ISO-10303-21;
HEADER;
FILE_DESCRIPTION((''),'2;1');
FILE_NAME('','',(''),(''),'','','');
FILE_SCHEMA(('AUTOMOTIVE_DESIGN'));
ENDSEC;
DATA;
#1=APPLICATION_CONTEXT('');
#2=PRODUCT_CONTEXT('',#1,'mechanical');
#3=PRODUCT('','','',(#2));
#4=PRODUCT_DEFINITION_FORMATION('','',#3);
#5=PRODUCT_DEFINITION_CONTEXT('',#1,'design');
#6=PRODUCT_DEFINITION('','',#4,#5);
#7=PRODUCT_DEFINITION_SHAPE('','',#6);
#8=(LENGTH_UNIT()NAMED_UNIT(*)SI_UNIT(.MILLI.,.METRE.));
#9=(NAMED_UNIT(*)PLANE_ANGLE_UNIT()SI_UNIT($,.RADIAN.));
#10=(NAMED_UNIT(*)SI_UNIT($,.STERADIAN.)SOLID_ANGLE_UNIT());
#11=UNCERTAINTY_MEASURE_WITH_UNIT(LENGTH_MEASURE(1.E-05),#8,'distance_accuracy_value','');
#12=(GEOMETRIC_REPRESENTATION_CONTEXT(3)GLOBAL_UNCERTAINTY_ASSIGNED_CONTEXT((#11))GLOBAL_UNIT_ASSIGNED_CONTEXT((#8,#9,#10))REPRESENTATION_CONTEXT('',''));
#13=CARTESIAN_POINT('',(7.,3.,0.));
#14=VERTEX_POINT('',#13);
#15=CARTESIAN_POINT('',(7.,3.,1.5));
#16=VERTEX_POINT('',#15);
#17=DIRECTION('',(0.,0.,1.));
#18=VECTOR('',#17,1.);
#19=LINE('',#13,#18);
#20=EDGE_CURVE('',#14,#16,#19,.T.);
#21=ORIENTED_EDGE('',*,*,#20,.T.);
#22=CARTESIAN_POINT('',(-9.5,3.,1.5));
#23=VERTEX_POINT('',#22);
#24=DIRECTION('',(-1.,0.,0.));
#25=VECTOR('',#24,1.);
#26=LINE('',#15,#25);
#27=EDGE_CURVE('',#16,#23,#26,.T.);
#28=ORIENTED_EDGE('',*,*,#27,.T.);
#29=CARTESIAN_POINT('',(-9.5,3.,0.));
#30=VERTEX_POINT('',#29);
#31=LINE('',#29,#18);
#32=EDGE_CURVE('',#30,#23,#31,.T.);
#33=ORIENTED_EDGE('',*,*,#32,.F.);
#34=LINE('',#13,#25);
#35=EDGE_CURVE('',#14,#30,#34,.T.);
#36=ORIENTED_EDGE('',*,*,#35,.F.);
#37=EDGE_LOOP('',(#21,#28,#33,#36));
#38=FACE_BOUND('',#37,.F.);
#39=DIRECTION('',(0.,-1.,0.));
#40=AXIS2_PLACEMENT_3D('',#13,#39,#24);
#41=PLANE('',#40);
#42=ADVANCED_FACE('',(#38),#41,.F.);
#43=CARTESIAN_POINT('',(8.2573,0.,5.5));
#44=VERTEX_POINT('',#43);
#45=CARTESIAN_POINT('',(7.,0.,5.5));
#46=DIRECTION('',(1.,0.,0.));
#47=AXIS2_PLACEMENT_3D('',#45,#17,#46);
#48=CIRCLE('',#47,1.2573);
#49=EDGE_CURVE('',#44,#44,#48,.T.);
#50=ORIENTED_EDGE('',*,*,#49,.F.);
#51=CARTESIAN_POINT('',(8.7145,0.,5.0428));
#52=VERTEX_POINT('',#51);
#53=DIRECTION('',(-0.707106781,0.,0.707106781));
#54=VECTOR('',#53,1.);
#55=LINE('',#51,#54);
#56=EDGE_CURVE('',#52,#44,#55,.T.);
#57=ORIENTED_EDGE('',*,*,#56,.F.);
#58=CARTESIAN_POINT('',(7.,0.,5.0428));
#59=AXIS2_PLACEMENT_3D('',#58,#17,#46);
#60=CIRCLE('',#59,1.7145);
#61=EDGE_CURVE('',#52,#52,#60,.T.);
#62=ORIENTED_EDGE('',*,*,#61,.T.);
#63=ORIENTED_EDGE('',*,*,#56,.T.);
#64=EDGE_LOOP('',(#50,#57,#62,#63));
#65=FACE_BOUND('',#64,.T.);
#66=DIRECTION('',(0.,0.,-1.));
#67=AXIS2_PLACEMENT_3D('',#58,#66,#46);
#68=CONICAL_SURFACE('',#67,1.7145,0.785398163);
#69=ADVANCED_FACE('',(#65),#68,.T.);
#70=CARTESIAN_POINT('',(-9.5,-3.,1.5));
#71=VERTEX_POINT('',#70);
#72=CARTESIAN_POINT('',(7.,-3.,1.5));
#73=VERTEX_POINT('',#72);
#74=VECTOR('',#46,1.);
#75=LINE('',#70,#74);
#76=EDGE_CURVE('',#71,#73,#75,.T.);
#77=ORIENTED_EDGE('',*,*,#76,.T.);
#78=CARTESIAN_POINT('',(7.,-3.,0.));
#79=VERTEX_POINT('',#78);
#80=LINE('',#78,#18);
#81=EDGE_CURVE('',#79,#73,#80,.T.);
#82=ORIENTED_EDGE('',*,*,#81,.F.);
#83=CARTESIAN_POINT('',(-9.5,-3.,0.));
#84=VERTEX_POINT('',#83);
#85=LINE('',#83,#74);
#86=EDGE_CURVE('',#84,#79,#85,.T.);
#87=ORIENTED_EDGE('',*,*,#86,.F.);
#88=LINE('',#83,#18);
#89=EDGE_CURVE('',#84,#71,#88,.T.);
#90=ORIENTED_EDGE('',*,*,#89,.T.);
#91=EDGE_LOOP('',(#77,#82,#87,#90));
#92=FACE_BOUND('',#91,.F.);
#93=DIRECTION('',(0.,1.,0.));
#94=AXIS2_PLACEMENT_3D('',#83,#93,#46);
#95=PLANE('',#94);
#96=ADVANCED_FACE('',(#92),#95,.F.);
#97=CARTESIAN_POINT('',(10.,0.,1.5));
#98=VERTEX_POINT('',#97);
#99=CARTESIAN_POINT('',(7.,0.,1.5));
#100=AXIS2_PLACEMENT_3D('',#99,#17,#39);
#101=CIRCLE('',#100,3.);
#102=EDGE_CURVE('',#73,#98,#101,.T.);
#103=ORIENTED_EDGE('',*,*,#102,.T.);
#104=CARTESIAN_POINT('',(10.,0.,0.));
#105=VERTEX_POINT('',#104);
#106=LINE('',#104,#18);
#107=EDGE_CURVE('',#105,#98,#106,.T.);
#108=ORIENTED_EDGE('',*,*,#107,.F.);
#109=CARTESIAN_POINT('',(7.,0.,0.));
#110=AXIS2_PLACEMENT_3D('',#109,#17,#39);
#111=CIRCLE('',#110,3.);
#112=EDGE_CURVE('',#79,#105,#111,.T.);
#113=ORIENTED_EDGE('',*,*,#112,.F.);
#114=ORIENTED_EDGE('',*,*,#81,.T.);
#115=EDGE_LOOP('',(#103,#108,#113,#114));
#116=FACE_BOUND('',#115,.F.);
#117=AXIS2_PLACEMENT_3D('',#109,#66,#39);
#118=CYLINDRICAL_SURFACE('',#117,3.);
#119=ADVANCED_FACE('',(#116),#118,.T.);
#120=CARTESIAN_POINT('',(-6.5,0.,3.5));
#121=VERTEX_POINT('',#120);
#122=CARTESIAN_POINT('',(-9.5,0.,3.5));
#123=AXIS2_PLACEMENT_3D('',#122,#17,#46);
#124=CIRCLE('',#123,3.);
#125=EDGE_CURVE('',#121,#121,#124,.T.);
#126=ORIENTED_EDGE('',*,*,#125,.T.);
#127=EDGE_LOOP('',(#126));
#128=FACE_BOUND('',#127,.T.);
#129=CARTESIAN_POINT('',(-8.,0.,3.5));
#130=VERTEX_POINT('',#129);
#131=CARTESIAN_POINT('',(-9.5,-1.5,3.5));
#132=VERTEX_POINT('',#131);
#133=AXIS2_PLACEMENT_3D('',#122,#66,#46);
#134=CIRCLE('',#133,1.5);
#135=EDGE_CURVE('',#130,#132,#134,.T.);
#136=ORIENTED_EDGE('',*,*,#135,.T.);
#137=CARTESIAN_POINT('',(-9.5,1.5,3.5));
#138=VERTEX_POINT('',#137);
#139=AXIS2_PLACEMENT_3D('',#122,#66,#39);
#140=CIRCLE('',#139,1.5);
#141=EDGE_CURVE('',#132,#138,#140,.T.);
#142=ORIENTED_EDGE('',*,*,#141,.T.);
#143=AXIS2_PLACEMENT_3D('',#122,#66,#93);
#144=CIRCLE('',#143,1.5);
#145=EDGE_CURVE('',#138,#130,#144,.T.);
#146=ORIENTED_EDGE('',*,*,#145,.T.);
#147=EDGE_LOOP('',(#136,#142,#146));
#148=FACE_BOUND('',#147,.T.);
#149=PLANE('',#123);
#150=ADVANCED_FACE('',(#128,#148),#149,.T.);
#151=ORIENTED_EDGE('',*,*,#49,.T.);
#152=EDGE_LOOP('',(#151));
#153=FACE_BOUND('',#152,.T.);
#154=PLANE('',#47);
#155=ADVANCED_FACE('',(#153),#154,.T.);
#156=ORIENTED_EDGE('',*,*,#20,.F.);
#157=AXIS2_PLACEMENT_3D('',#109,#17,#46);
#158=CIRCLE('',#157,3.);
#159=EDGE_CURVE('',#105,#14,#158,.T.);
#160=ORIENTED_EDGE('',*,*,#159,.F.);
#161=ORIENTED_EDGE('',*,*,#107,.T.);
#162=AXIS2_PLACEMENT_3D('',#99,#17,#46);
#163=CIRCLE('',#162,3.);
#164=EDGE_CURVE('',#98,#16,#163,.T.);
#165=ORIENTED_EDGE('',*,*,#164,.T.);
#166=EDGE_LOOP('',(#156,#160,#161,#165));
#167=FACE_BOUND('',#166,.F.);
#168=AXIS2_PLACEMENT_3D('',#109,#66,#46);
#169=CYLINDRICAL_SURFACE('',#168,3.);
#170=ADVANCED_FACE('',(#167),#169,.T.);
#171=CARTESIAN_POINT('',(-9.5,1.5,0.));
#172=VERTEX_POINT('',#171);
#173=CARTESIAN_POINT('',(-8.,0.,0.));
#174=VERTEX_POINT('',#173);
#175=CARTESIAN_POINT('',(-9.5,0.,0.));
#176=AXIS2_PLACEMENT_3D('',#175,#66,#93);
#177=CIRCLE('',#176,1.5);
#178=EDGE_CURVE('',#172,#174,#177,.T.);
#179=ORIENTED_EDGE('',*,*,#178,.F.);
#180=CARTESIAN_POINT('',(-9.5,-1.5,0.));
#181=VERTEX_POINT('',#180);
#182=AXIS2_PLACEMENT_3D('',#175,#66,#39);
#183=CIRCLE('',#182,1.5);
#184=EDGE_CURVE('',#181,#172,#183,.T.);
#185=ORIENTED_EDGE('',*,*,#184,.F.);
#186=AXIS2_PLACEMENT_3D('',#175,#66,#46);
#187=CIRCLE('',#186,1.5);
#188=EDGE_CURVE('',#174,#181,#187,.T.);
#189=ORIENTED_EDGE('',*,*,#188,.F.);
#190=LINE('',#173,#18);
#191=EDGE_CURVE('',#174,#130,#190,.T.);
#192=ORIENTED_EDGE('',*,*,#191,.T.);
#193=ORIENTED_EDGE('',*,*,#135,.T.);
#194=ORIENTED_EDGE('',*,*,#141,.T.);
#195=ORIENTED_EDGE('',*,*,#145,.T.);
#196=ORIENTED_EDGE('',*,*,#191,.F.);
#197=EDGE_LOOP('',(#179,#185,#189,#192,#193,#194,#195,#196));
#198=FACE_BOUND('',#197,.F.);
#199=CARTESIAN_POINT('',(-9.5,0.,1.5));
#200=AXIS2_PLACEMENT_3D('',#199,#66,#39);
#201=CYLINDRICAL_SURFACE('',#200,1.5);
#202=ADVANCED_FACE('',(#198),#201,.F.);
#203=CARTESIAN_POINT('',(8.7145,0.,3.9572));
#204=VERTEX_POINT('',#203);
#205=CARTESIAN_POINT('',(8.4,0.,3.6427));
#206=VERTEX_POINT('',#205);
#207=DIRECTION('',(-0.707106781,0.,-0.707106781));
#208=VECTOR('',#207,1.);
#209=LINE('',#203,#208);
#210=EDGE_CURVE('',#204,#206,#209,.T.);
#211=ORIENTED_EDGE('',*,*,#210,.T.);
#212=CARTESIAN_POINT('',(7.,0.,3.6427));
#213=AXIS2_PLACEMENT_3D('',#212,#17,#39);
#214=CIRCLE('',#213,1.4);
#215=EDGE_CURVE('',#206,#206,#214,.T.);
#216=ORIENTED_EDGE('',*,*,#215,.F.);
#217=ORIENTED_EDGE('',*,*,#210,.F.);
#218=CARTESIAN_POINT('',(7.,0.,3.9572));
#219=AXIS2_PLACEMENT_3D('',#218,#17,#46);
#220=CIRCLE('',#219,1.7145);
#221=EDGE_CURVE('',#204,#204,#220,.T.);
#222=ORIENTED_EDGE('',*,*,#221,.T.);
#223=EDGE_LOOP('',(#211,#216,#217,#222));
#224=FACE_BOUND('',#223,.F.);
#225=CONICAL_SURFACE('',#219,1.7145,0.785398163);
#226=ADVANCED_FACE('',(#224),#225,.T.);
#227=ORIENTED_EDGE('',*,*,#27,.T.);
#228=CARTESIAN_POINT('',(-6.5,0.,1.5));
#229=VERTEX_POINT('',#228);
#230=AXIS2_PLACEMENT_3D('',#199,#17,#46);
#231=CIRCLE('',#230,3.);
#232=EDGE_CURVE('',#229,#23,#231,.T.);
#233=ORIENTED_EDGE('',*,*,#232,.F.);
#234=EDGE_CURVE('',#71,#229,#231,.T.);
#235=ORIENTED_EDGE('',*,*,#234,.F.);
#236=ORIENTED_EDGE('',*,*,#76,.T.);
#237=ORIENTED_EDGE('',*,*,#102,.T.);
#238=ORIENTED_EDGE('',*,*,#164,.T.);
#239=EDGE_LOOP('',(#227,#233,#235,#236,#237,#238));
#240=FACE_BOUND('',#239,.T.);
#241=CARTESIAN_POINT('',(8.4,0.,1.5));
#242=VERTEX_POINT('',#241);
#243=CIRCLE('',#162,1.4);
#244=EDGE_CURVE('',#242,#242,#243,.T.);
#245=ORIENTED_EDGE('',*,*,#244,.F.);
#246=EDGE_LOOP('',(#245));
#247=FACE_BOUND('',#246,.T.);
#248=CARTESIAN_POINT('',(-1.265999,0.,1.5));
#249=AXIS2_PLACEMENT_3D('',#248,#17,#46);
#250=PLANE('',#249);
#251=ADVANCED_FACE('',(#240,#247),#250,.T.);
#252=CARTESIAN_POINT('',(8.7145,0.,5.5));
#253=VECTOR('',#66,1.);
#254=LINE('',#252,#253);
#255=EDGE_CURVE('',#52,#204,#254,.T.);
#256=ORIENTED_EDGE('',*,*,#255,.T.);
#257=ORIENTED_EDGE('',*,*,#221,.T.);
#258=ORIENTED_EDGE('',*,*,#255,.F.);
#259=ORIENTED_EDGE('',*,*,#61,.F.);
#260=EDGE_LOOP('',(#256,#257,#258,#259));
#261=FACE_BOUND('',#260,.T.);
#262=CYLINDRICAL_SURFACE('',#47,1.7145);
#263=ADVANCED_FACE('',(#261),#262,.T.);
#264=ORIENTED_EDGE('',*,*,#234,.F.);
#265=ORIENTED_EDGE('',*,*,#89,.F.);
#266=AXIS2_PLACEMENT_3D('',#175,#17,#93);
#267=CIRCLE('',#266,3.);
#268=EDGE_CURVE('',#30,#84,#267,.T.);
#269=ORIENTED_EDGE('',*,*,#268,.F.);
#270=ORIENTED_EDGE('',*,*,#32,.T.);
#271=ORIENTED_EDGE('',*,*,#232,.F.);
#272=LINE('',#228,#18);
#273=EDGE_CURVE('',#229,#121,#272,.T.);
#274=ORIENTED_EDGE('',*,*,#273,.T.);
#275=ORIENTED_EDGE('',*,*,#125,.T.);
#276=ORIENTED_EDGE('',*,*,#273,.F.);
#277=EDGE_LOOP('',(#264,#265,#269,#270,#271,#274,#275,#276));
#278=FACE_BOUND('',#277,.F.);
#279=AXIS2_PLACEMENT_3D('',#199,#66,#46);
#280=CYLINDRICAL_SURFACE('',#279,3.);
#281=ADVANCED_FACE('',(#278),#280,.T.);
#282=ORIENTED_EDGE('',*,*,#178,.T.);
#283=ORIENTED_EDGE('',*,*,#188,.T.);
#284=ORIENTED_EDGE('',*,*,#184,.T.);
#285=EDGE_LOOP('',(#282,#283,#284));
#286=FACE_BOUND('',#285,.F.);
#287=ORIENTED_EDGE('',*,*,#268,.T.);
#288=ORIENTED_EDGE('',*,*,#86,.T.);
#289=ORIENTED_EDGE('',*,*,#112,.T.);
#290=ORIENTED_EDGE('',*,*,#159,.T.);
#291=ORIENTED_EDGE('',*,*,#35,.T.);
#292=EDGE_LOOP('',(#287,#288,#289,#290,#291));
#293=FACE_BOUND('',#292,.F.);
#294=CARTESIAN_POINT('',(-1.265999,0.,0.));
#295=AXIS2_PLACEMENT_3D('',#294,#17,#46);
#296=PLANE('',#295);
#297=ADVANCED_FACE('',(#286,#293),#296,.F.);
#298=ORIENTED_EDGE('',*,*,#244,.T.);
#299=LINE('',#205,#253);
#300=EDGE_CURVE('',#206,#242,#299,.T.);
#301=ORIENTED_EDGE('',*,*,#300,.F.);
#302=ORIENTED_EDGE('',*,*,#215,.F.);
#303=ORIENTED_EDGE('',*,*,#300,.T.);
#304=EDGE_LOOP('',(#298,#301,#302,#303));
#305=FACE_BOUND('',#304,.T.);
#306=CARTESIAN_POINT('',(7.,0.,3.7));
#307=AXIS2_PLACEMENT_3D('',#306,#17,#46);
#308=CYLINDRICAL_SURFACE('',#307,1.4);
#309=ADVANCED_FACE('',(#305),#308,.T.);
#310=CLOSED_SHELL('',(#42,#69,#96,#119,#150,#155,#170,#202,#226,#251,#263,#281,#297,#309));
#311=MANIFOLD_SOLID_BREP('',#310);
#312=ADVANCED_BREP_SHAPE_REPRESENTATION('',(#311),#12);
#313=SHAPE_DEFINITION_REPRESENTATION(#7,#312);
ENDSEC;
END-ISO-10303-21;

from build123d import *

# Parameters (mm, degrees)
F1_DEPTH    = 1.5
F2_R        = 1.4
F3_DEPTH    = 4
F4_R        = 1.7145
F5_DEPTH    = 2
F6_SIZE     = 0.4572
F7_S5_R     = 1.4
F7_T6_DEPTH = 4
F8_R        = 3
F9_DEPTH    = 2
F10_DEPTH   = 25.4


# Not quite as in the source:
# - a fillet or chamfer that OpenCascade refuses, or shapes differently, is made with other operations: its cross-section is extruded or revolved along the edge and cut away or added


with BuildPart() as f1:
    # F0 (on Top) → F1 (new body)
    with BuildSketch(Plane.XY):
        with BuildLine():
            Line((-9.5, -3), (7, -3))
            ThreePointArc((7, -3), (4, 0), (7, 3))
            Line((7, 3), (-9.5, 3))
            ThreePointArc((-9.5, 3), (-7.3786796564, 2.1213203436), (-6.5, 0))
            ThreePointArc((-6.5, 0), (-7.3786796564, -2.1213203436), (-9.5, -3))
        make_face()
        with BuildLine():
            ThreePointArc((7, 3), (4, 0), (7, -3))
            ThreePointArc((7, -3), (9.1213203436, -2.1213203436), (10, 0))
            ThreePointArc((10, 0), (9.1213203436, 2.1213203436), (7, 3))
        make_face()
        with BuildLine():
            ThreePointArc((-9.5, 3), (-12.5, 0), (-9.5, -3))
            Line((-9.5, -3), (-9.5, -1.5))
            ThreePointArc((-9.5, -1.5), (-11, 0), (-9.5, 1.5))
            Line((-9.5, 1.5), (-9.5, 3))
        make_face()
        with BuildLine():
            Line((-9.5, -1.5), (-9.5, -3))
            ThreePointArc((-9.5, -3), (-7.3786796564, -2.1213203436), (-6.5, 0))
            ThreePointArc((-6.5, 0), (-7.3786796564, 2.1213203436), (-9.5, 3))
            Line((-9.5, 3), (-9.5, 1.5))
            ThreePointArc((-9.5, 1.5), (-8.4393398282, 1.0606601718), (-8, 0))
            ThreePointArc((-8, 0), (-8.4393398282, -1.0606601718), (-9.5, -1.5))
        make_face()
    extrude(amount=F1_DEPTH)

    # F2 (on face) → F3 (join)
    with BuildSketch(Plane.XY.offset(1.5)):
        with Locations((7, 0)):
            Circle(F2_R)
    extrude(amount=F3_DEPTH)

    # F4 (on face) → F5 (join)
    with BuildSketch(Plane.XY.offset(5.5)):
        with Locations((7, 0)):
            Circle(F4_R)
    extrude(amount=-F5_DEPTH)

    # F6
    f6_edges = [f1.edges().sort_by_distance(p)[0] for p in [
        (5.2855, 0, 5.5),
    ]]
    chamfer(f6_edges, length=F6_SIZE)

    # F7: chamfer of 0.4572 on 1 edges, made by hand


with BuildPart() as f7_tool2:
    # F7_s3 → F7_t4 (revolve)
    with BuildSketch(Plane.XZ):
        Polygon((8.7145, 3.9572), (8.2573, 3.5), (8.7145, 3.5), align=None)
    revolve(axis=Axis((7, 0, 3.5), (0, 0, 1)))

    # F7_s5 → F7_t6 (cut, symmetric)
    with BuildSketch(Plane.XY.offset(3.7)):
        with Locations((7, 0)):
            Circle(F7_S5_R)
    extrude(amount=F7_T6_DEPTH, both=True, mode=Mode.SUBTRACT)


with BuildPart() as f1_1:
    add(f1.part)

    # F7_t1: cut F7_tool2
    add(f7_tool2.part, mode=Mode.SUBTRACT)

    # F8 (on face) → F9 (join)
    with BuildSketch(Plane.XY.offset(1.5)):
        with Locations((-9.5, 0)):
            Circle(F8_R)
    extrude(amount=F9_DEPTH)

    # F10 (cut): a face of the model
    f10_faces = [f1_1.faces().sort_by_distance(p)[0] for p in [
        (-9.5, 0, 1.5),
    ]]
    extrude(f10_faces, amount=-F10_DEPTH, mode=Mode.SUBTRACT)


solid = f1_1.part
